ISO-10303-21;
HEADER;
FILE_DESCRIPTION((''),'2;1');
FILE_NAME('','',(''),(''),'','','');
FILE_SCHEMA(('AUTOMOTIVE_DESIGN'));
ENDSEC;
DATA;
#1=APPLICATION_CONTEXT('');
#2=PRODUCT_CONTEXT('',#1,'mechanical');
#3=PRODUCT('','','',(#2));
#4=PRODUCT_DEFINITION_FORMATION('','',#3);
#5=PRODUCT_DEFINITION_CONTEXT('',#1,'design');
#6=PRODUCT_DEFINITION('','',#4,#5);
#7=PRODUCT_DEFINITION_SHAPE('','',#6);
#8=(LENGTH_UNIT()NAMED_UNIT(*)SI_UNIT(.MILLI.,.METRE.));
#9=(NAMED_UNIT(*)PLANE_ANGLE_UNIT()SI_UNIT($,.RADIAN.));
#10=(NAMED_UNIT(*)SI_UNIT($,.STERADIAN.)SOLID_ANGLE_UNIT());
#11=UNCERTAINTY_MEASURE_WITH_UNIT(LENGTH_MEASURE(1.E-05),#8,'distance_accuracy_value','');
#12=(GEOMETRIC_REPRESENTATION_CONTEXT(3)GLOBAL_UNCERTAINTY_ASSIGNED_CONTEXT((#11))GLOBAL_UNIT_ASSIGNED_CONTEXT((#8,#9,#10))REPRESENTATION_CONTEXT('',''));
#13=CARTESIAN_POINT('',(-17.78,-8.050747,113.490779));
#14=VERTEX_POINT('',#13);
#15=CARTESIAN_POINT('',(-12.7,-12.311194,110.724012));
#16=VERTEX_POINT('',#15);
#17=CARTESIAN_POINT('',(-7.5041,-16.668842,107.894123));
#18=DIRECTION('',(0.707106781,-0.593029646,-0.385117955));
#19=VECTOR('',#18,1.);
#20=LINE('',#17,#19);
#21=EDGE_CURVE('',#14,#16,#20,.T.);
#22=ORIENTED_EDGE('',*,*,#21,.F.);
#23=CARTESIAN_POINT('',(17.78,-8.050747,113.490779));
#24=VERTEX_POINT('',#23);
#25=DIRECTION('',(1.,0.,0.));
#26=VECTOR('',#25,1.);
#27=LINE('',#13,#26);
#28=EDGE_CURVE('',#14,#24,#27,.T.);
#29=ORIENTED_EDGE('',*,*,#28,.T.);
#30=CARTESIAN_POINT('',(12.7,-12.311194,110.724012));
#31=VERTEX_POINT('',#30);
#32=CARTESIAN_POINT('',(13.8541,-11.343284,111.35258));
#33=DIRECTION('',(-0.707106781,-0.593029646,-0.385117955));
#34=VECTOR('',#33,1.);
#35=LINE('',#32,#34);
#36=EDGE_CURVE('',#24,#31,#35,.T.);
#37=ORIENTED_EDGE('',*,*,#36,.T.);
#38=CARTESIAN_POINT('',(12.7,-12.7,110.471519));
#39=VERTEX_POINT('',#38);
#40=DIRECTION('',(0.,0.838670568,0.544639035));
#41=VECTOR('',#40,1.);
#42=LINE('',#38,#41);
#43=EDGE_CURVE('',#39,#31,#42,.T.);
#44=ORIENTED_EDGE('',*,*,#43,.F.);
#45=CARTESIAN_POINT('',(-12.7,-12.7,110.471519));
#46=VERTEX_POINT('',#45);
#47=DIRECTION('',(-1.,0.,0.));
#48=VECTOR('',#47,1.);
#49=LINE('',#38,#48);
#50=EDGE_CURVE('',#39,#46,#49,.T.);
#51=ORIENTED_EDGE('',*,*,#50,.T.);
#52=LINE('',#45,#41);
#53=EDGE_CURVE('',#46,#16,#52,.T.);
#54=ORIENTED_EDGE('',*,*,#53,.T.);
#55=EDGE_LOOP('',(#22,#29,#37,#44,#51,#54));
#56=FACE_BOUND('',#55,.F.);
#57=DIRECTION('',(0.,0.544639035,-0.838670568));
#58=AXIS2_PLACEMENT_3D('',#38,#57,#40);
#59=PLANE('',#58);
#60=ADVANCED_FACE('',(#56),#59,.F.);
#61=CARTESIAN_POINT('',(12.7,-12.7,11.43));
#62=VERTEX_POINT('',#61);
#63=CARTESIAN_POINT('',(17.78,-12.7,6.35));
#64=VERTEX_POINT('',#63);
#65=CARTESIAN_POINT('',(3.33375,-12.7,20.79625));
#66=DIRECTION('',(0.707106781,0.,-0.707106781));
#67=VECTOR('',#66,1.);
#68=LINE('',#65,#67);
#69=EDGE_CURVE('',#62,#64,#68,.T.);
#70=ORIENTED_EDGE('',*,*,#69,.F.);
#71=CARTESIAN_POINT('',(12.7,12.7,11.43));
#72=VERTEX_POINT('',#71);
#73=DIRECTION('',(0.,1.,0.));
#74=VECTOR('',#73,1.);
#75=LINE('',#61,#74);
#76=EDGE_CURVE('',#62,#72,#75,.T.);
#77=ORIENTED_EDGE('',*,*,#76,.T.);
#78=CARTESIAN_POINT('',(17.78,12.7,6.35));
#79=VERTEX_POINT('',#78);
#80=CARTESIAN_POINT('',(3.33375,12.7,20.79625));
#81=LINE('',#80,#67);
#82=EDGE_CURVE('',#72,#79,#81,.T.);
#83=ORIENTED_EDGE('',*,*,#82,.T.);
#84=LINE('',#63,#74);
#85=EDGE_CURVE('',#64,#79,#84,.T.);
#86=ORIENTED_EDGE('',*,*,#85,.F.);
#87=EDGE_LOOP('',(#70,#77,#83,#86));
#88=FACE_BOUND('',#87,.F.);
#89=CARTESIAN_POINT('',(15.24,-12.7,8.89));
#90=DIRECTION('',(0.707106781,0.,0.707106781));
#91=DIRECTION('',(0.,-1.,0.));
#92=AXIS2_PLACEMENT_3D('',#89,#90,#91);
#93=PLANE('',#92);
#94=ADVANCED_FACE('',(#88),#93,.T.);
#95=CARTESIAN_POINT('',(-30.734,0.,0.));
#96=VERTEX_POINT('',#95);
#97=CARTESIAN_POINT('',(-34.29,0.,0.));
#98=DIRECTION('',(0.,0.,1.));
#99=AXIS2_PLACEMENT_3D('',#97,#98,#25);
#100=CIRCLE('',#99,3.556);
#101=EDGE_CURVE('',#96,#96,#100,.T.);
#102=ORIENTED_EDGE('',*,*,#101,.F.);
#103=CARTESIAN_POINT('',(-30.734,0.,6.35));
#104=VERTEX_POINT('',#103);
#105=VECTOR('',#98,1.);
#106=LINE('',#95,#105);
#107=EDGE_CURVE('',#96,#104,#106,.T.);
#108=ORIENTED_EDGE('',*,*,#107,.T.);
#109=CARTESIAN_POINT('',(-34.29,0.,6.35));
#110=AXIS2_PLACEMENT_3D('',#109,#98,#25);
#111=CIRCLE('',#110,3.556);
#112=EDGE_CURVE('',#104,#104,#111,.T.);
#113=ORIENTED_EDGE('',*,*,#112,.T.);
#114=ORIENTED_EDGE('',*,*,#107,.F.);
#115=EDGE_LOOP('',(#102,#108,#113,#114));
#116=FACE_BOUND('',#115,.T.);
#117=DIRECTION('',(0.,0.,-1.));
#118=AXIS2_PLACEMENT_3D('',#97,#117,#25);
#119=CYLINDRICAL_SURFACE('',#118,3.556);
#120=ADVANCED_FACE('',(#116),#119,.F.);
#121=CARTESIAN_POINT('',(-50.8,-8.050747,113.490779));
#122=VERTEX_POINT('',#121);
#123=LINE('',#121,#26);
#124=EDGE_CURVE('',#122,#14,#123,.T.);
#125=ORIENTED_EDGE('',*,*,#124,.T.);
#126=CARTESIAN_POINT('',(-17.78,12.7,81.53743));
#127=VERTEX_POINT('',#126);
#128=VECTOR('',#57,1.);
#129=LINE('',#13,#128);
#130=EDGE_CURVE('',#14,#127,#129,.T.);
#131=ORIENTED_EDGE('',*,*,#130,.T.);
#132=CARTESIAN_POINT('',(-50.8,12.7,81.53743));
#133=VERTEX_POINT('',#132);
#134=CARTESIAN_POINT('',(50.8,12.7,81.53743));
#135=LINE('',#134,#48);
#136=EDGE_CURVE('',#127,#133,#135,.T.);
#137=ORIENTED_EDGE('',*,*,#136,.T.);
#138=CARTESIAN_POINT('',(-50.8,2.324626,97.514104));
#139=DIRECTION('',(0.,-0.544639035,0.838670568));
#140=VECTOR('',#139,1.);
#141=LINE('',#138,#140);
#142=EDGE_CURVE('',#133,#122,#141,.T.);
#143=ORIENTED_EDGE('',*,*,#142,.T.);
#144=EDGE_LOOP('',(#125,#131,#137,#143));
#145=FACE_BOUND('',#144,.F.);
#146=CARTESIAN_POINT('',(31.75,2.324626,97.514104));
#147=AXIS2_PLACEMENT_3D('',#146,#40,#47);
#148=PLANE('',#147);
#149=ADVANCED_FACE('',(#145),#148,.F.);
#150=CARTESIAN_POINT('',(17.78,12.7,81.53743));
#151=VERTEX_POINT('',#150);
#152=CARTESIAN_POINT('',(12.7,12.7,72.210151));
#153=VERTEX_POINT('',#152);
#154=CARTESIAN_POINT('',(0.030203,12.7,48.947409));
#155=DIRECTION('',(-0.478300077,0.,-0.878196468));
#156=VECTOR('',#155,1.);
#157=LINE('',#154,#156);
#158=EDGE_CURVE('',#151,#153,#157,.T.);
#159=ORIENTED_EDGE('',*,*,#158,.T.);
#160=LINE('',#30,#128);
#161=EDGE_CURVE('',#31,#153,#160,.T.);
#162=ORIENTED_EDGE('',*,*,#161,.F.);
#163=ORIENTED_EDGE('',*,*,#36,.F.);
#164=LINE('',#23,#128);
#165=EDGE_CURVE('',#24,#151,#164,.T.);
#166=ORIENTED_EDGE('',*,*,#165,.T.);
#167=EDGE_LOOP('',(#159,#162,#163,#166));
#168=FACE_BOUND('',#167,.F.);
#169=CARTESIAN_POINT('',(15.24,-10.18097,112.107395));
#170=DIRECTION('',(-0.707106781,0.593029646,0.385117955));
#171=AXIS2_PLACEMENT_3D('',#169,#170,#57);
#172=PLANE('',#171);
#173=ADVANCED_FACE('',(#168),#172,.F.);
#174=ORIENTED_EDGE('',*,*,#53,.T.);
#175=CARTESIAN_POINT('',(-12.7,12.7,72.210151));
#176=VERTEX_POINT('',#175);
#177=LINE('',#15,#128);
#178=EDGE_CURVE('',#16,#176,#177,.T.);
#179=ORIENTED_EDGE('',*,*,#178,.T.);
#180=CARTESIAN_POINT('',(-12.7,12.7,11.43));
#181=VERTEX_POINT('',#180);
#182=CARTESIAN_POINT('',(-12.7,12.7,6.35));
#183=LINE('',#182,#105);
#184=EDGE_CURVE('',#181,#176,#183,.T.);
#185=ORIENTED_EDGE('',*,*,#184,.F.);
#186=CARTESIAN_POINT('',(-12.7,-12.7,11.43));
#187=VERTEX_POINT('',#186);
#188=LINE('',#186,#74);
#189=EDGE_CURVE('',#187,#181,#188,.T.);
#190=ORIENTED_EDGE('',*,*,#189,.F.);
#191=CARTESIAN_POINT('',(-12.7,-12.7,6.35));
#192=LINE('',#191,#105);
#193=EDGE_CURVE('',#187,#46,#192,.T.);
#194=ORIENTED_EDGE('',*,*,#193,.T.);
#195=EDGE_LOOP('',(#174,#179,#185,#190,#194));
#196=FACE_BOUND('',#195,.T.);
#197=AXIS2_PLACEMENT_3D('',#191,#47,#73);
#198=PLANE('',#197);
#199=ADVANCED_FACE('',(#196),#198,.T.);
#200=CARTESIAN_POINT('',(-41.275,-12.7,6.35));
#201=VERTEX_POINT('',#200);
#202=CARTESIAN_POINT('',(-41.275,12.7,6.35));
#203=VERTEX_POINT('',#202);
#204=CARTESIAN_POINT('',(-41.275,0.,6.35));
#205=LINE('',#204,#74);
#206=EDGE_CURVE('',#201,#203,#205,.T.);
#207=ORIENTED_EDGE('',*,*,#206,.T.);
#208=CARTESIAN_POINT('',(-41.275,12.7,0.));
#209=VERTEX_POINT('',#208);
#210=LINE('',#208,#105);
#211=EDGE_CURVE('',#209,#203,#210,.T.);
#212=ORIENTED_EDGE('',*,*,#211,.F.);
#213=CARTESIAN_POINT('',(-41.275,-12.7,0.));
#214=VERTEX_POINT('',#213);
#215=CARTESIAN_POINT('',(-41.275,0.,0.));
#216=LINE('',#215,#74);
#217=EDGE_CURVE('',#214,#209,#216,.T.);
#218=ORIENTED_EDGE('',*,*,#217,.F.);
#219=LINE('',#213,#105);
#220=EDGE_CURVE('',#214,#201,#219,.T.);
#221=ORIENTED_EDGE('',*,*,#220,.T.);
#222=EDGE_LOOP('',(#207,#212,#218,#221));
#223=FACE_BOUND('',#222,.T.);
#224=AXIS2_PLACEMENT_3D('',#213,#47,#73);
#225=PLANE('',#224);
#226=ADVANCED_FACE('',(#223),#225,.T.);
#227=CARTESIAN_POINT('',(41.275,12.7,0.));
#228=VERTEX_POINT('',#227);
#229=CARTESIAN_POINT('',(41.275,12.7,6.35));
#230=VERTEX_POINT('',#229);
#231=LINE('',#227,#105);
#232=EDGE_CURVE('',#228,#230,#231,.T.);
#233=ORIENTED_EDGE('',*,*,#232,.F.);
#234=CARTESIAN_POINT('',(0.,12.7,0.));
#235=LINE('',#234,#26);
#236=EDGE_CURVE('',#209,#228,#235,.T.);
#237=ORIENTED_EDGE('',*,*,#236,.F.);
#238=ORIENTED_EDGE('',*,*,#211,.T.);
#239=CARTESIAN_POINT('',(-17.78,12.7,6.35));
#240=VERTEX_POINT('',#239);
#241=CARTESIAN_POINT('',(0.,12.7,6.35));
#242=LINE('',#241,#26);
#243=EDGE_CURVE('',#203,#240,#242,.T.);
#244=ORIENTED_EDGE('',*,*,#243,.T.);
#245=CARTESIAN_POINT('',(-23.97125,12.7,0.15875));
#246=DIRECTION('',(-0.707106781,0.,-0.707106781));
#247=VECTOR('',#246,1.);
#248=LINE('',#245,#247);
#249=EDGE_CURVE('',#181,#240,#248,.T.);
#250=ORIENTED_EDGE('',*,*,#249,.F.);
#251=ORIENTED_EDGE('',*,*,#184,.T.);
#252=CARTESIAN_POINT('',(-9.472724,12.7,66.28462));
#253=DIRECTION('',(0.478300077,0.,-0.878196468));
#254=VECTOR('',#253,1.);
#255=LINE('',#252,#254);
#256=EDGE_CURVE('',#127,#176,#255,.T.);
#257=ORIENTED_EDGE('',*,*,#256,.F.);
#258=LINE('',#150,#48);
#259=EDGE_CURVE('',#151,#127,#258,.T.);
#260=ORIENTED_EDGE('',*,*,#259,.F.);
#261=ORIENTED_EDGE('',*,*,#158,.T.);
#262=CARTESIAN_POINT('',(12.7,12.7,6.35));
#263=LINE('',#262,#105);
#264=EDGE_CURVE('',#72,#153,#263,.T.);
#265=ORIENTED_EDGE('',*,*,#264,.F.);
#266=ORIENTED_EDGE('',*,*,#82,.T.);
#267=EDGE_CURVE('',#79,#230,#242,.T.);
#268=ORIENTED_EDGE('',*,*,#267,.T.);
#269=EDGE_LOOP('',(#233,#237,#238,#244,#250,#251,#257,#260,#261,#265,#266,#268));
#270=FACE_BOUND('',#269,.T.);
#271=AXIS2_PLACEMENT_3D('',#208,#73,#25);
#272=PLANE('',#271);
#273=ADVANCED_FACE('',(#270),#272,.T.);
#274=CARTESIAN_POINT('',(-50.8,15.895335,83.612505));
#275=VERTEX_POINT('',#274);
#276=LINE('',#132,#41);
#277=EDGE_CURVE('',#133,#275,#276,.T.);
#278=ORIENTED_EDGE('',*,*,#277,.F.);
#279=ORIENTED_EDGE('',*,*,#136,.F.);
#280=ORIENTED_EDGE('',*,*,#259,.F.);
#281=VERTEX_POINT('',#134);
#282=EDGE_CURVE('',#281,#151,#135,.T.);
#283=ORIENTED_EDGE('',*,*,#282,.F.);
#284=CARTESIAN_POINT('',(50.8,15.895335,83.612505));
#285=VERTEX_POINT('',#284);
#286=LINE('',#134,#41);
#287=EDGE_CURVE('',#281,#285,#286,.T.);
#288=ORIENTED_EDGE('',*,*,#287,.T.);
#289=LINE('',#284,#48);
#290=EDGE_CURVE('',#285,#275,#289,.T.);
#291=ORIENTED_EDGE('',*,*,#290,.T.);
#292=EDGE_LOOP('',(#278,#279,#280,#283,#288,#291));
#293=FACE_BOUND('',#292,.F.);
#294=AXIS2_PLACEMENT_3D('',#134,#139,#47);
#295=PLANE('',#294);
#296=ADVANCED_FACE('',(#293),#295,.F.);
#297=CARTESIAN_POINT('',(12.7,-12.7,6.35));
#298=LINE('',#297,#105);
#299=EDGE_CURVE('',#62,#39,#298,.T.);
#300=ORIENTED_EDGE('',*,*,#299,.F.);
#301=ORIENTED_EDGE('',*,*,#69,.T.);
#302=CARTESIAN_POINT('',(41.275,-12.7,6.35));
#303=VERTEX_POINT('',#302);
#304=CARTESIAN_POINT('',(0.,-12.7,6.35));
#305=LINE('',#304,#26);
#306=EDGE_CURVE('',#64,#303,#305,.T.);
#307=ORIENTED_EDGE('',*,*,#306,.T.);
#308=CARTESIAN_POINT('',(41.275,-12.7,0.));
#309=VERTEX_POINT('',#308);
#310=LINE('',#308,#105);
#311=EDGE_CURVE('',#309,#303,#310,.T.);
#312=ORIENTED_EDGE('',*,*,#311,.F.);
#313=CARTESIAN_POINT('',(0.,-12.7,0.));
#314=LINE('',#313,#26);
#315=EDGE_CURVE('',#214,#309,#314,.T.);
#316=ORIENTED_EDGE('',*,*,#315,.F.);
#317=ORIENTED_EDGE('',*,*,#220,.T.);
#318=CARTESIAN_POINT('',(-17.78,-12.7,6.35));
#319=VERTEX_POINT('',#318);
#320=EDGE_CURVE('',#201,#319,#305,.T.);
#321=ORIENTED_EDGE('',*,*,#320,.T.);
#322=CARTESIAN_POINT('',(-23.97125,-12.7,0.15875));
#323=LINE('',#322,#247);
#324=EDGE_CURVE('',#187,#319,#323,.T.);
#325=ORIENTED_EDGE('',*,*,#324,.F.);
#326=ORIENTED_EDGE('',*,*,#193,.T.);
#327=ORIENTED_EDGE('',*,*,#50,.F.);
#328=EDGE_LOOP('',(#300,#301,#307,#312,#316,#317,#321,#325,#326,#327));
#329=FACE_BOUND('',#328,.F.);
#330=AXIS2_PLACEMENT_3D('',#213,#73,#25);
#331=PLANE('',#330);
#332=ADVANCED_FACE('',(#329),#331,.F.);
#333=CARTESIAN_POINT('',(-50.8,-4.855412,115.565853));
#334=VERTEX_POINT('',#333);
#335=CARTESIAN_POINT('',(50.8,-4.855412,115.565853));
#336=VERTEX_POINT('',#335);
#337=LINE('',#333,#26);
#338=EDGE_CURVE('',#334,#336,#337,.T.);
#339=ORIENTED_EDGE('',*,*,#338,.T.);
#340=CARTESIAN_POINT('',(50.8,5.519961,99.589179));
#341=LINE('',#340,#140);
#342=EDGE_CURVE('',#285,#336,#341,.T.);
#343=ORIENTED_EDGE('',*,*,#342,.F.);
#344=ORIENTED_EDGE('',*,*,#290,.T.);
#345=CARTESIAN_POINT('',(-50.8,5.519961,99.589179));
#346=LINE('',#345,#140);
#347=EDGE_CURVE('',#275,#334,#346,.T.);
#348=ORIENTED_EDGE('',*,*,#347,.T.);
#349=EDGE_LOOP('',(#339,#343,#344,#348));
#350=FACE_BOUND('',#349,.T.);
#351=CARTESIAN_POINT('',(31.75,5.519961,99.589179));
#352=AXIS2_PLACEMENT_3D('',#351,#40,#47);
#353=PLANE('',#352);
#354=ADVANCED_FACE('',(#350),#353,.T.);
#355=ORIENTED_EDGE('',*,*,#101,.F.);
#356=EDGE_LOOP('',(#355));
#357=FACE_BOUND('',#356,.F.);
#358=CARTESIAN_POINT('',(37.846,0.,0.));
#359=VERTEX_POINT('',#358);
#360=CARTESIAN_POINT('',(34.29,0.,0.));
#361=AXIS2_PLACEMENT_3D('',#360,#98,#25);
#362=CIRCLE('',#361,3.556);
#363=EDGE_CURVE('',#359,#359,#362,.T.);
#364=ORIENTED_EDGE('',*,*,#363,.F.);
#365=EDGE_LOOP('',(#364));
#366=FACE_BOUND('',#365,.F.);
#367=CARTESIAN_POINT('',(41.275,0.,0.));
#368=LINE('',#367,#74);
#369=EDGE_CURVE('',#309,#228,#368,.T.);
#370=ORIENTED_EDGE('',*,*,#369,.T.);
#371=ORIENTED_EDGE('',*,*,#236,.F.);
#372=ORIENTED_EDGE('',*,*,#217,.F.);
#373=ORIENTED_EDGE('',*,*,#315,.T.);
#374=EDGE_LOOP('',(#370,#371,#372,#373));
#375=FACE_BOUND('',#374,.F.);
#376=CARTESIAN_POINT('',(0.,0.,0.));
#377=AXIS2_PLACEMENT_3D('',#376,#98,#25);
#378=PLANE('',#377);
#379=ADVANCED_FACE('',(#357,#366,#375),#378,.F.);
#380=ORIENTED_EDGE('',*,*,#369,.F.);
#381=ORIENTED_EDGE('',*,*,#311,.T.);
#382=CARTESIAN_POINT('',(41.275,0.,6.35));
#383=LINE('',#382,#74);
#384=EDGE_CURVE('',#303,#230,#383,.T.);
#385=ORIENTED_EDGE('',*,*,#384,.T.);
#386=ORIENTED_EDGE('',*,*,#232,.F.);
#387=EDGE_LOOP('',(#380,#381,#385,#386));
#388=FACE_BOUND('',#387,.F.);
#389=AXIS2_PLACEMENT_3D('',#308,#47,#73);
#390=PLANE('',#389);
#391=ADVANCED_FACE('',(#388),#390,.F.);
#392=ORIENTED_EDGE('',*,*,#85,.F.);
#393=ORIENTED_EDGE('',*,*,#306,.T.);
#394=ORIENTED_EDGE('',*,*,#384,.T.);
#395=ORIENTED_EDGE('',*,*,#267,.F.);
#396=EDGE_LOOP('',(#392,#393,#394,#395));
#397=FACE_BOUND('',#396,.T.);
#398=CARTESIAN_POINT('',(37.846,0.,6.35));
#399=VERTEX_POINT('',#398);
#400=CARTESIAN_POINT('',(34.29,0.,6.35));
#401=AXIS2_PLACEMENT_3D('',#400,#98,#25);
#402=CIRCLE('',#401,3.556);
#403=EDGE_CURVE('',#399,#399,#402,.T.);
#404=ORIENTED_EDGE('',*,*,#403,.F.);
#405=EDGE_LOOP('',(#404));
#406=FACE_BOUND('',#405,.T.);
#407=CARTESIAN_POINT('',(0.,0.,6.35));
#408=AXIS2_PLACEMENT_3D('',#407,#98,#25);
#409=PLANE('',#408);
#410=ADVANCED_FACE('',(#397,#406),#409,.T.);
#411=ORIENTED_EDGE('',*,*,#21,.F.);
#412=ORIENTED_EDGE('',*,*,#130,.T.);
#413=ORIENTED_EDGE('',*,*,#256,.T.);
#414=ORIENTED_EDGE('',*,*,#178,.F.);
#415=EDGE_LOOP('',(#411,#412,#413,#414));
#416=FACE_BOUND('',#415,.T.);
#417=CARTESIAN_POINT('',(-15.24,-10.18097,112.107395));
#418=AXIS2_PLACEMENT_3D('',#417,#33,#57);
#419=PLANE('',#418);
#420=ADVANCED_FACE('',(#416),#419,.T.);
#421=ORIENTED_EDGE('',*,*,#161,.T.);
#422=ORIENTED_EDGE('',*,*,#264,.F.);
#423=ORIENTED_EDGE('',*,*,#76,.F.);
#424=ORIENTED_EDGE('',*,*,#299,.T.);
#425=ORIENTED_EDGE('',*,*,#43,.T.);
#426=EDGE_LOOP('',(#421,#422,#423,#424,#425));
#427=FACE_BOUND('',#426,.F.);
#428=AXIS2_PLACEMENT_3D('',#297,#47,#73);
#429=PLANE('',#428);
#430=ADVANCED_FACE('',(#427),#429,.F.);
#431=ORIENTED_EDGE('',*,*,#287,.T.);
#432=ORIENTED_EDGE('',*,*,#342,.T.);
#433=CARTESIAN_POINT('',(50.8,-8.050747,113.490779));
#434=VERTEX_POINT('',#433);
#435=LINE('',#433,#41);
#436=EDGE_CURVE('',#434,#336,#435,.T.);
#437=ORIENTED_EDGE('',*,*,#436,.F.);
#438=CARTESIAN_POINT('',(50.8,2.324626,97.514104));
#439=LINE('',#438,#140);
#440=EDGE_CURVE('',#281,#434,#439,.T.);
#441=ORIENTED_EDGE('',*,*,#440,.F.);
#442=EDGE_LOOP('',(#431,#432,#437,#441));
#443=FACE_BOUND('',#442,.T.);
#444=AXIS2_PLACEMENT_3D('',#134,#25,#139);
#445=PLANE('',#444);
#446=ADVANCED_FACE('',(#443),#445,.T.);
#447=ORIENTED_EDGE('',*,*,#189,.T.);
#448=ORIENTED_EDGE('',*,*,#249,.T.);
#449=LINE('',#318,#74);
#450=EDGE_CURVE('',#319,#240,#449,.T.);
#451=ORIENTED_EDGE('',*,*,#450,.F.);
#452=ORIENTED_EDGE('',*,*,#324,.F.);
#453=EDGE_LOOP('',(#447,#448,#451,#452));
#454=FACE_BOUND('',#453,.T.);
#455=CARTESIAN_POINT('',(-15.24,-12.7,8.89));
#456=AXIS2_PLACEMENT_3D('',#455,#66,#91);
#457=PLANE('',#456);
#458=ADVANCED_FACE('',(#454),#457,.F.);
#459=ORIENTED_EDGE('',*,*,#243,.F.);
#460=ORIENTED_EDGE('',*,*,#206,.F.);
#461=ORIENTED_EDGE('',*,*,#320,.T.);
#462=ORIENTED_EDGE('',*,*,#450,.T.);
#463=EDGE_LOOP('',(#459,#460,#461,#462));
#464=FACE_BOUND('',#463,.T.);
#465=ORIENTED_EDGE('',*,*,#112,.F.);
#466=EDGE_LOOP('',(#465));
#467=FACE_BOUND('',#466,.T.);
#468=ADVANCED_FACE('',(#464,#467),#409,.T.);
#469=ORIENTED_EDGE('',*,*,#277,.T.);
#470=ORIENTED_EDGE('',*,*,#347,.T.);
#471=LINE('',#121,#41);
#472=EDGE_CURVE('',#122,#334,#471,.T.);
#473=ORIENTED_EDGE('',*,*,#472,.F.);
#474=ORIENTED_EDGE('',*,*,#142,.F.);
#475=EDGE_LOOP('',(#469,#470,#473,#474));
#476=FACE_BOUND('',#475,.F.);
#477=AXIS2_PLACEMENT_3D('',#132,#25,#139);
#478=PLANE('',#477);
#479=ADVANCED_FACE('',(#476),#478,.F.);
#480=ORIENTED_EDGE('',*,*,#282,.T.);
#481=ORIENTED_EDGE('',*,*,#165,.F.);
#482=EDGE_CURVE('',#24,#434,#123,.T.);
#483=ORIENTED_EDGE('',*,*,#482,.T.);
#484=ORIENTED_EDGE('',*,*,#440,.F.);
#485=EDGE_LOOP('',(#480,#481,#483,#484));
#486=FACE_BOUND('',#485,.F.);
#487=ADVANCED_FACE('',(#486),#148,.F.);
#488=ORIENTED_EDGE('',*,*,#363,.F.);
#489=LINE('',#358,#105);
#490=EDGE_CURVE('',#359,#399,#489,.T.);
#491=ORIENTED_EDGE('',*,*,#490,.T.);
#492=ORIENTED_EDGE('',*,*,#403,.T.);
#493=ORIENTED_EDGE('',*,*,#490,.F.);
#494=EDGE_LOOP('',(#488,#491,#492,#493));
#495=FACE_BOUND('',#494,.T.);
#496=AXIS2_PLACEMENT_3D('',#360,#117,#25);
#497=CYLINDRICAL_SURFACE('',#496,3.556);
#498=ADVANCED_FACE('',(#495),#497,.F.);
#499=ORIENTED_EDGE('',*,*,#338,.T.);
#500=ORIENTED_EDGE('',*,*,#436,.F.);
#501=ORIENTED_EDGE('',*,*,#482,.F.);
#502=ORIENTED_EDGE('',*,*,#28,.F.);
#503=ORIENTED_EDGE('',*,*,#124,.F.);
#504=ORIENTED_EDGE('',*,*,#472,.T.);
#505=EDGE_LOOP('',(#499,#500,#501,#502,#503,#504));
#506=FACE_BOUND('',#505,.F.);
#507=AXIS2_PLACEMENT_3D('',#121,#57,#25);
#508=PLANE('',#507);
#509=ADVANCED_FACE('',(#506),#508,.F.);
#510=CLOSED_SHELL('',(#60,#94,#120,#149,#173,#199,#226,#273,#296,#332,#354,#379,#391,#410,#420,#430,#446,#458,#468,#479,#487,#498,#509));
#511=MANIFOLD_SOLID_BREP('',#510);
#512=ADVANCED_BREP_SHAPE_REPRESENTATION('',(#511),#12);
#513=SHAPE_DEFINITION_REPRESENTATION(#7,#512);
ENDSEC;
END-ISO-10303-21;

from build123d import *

# Parameters (mm, degrees)
F0_W     = 82.55
F0_H     = 25.4
F0_R     = 3.556
F1_DEPTH = 6.35
F2_W     = 25.4
F2_H     = 25.4
F3_DEPTH = 114.3
F5_DEPTH = 25.4
F6_W     = 38.1
F6_H     = 38.1
F6_W_2   = 25.4
F7_DEPTH = 3.81
F9_DEPTH = 25.4
F10_SIZE = 5.08


with BuildPart() as f1:
    # F0 (on Top) → F1 (new body)
    with BuildSketch(Plane.XY):
        Rectangle(F0_W, F0_H)
        with Locations((-34.29, 0)):
            Circle(F0_R, mode=Mode.SUBTRACT)
        with Locations((34.29, 0)):
            Circle(F0_R, mode=Mode.SUBTRACT)
    extrude(amount=F1_DEPTH)

    # F2 (on face) → F3 (join)
    with BuildSketch(Plane.XY.offset(6.35)):
        Rectangle(F2_W, F2_H)
    extrude(amount=F3_DEPTH)

    # F4 (on face) → F5 (cut)
    with BuildSketch(Plane.YZ.offset(12.7)):
        Polygon((12.7, 120.65), (-12.7, 120.65), (12.7, 81.5374299191), align=None)
    extrude(amount=-F5_DEPTH, mode=Mode.SUBTRACT)

    # F6 (on face) → F7 (join)
    with BuildSketch(Plane(origin=(0, 46.1768520488, 29.9875983504), x_dir=(-1, 0, 0), z_dir=(0, 0.8386705679, 0.544639035))):
        with Locations((-31.75, 80.5161269144)):
            Rectangle(F6_W, F6_H)
        with Locations((0, 80.5161269144)):
            Rectangle(F6_W_2, F6_H)
        with Locations((31.75, 80.5161269144)):
            Rectangle(F6_W, F6_H)
    extrude(amount=F7_DEPTH)

    # F8 (on face) → F9 (cut)
    with BuildSketch(Plane.YZ.offset(12.7)):
        Polygon((-12.7, 110.4715185089), (-8.0507472341, 113.4907785578), (-12.7, 120.65), align=None)
    extrude(amount=-F9_DEPTH, mode=Mode.SUBTRACT)

    # F10
    f10_edges = [f1.edges().sort_by_distance(p)[0] for p in [
        (12.7, 0, 6.35),
        (-12.7, 0, 6.35),
        (12.7, 2.324626, 97.514104),
        (-12.7, 2.324626, 97.514104),
    ]]
    chamfer(f10_edges, length=F10_SIZE)


solid = f1.part
